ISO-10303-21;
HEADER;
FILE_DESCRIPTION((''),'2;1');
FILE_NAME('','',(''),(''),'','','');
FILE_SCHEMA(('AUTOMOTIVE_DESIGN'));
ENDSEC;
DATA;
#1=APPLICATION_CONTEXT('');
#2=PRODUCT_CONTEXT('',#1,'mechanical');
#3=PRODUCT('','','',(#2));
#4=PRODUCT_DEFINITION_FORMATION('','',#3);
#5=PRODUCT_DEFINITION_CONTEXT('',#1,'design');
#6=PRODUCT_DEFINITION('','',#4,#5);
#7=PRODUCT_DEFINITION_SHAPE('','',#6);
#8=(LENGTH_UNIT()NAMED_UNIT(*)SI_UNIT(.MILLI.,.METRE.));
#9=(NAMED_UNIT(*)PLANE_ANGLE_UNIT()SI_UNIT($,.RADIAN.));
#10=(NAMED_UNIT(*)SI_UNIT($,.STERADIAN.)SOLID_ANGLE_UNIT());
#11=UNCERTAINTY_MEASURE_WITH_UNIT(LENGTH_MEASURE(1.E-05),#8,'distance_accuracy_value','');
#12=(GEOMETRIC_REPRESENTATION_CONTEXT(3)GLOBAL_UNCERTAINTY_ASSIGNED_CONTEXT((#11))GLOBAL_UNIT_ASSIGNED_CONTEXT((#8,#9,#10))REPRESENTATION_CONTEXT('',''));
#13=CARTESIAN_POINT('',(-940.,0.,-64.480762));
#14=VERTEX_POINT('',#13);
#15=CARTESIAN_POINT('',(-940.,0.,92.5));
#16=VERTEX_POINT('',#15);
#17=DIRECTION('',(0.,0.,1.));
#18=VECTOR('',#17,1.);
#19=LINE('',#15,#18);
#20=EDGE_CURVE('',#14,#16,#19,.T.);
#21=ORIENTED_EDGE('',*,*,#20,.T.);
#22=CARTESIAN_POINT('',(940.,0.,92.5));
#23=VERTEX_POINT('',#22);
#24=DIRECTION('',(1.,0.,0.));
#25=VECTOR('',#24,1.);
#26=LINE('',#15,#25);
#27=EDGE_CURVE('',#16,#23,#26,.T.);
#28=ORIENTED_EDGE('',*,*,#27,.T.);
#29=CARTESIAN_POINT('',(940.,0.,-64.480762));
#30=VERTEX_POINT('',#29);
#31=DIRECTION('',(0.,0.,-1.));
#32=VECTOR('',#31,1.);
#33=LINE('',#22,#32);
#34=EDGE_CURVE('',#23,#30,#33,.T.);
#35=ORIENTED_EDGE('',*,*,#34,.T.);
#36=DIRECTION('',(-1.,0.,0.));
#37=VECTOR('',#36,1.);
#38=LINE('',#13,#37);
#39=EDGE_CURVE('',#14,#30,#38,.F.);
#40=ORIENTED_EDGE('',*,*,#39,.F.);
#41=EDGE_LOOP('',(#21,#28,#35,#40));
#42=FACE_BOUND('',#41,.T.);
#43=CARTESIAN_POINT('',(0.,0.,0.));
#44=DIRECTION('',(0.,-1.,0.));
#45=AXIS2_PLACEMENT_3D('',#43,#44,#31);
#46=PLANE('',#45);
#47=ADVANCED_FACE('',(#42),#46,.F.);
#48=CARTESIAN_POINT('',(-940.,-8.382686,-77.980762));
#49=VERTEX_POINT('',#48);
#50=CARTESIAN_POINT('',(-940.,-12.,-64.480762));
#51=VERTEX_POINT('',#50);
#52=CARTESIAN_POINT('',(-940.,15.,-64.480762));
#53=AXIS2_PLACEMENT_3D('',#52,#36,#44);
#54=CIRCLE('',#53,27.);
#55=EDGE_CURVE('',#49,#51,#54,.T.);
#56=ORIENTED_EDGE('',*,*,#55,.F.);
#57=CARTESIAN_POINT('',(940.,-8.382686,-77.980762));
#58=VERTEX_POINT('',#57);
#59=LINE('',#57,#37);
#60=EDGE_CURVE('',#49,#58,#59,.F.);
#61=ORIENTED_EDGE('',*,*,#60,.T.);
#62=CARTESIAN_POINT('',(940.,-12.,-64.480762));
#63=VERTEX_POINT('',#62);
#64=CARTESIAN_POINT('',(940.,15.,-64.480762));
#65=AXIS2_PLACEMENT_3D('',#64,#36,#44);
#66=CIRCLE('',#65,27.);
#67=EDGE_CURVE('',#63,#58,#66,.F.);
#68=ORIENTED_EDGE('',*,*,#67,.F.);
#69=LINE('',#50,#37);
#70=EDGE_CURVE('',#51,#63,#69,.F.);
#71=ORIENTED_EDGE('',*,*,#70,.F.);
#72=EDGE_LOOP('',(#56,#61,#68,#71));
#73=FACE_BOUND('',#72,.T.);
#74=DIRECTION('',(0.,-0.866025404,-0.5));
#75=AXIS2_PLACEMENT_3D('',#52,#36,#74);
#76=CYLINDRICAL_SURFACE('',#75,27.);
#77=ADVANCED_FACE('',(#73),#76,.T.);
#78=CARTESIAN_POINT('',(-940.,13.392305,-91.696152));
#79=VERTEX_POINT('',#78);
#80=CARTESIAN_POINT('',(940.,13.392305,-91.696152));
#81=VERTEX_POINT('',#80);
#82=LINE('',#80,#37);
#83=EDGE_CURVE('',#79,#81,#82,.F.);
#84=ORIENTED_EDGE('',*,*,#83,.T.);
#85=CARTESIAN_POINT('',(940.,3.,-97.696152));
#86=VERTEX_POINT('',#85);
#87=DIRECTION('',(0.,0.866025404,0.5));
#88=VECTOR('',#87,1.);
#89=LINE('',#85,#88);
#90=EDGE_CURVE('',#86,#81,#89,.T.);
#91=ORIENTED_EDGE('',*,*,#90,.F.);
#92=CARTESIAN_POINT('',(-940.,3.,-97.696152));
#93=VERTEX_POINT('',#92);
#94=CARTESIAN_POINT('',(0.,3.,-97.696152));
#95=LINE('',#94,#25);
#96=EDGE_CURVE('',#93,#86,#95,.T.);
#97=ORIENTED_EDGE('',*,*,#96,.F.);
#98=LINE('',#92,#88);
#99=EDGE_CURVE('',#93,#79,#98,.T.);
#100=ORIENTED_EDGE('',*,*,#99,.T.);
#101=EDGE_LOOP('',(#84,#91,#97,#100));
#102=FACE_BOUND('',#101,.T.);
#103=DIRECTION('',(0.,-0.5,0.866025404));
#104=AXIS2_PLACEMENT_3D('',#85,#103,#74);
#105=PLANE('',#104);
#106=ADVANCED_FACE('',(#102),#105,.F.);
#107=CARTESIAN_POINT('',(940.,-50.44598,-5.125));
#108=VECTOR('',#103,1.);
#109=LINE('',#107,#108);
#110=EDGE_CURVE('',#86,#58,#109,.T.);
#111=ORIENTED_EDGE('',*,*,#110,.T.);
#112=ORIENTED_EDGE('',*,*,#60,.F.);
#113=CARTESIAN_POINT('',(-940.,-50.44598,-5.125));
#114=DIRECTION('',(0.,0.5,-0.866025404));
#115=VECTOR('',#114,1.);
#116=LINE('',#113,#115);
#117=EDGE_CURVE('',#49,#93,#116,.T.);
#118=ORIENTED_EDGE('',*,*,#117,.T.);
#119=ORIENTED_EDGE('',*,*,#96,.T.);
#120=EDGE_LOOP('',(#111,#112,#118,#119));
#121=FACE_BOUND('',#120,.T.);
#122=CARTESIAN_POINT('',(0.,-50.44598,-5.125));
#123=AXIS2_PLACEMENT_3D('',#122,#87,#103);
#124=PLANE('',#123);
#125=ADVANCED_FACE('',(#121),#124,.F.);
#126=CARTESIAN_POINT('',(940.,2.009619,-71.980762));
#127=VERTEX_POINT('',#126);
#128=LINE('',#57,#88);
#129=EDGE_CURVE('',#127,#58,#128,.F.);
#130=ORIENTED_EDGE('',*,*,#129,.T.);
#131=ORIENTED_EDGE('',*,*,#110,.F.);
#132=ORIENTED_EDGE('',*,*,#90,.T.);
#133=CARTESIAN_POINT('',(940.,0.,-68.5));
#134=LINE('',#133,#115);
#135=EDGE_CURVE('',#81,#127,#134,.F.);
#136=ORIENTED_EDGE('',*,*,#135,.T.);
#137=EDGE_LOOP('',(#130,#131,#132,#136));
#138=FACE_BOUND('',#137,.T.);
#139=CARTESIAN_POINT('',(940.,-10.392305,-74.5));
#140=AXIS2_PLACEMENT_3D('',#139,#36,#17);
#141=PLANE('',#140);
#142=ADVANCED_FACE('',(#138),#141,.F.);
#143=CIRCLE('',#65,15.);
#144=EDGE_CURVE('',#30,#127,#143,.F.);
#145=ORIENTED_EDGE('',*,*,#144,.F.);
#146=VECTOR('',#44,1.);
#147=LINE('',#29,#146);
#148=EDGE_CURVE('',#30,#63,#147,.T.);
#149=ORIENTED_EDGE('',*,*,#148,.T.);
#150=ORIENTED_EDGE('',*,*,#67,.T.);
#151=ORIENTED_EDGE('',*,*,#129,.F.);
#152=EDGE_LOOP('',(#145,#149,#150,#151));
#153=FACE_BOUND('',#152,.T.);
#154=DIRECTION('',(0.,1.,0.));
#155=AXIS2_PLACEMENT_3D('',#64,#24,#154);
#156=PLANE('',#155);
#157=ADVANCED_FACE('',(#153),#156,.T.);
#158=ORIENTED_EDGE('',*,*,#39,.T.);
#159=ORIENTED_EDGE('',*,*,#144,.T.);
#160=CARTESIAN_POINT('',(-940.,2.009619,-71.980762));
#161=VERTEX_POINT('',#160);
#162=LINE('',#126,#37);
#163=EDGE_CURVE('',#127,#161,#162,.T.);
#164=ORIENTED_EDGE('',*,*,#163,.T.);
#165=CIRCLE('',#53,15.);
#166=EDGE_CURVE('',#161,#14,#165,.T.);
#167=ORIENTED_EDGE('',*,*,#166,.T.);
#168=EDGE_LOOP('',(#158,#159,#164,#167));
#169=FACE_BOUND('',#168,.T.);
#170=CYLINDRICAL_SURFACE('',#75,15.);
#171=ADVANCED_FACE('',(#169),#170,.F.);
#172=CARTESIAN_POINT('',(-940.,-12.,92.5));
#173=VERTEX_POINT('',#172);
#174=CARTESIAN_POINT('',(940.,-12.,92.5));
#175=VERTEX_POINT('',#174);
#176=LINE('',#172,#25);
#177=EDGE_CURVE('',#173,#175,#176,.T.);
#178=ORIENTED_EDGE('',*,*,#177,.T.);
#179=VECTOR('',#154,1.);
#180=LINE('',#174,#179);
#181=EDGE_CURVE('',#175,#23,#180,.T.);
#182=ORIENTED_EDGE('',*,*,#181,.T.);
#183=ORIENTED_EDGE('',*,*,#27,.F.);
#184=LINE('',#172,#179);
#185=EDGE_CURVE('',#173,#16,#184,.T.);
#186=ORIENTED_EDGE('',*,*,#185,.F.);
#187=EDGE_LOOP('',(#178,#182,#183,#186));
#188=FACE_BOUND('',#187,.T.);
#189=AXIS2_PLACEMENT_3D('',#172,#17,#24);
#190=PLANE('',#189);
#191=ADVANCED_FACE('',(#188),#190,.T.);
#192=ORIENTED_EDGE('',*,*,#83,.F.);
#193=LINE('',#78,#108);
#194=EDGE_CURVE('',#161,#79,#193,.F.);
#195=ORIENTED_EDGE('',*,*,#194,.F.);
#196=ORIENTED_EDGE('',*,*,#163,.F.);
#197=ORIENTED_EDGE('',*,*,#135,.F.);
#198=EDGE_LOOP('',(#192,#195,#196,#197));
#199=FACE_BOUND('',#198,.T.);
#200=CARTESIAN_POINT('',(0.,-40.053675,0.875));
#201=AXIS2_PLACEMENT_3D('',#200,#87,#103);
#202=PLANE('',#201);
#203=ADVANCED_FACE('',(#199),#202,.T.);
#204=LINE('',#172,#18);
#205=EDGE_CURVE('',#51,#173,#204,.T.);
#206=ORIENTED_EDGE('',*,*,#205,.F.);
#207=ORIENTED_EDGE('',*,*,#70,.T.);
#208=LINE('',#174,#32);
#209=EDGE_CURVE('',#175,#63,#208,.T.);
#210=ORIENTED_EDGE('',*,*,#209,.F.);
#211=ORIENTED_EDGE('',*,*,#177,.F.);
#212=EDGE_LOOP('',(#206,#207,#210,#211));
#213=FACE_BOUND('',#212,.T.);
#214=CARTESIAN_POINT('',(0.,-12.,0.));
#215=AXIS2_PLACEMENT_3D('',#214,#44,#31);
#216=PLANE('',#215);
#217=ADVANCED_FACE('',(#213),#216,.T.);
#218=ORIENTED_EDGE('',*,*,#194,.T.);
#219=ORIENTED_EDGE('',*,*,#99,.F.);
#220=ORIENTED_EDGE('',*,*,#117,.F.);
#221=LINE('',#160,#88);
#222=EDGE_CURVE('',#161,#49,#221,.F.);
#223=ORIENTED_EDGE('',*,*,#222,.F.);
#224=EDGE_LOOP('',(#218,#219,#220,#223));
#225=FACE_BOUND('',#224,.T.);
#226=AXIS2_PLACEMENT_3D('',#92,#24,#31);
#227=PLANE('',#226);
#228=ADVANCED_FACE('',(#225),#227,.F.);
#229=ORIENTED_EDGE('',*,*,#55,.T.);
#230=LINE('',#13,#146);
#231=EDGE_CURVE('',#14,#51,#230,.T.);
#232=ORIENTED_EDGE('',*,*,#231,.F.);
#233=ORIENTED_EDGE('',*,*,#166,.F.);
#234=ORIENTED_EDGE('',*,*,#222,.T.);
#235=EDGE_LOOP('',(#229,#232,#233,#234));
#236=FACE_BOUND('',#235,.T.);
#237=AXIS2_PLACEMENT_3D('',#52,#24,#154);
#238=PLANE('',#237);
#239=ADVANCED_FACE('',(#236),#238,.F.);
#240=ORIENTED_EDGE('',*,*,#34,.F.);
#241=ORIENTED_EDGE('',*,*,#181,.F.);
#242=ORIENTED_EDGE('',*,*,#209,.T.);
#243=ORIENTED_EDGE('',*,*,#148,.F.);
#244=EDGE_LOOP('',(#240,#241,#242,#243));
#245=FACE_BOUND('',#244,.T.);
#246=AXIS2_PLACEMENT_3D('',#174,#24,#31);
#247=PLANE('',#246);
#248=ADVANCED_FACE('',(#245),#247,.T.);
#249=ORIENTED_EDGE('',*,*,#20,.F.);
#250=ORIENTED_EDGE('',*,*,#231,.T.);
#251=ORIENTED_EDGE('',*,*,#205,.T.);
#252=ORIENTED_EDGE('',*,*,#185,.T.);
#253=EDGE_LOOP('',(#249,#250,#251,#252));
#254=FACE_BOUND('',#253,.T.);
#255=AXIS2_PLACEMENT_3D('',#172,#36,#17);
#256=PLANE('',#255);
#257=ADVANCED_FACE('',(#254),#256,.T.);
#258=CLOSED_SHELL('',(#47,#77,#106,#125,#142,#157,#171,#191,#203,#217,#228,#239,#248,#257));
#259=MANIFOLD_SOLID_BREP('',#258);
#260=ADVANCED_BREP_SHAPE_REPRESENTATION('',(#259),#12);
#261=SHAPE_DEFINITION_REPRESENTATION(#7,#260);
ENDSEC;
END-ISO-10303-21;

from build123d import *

# Parameters (mm, degrees)
SKETCH1_W            = 1880
SKETCH1_H            = 185
BASE_FLANGE1_DEPTH   = 12
EDGE_FLANGE1_START   = -940
EDGE_FLANGE1_DEPTH   = 1880
EDGE_FLANGE1_2_DEPTH = 1880


# Read off the part's stored shape, not the designer's step: Edge-Flange1
# Sheet-metal steps are written as plain solids
with BuildPart() as part:
    # Sketch1 → Base-Flange1 (new body)
    with BuildSketch(Plane(origin=(0, 0, 0), x_dir=(1, 0, 0), z_dir=(0, 1, 0))):
        Rectangle(SKETCH1_W, SKETCH1_H)
    extrude(amount=-BASE_FLANGE1_DEPTH)

    # Edge-Flange1 outline → Edge-Flange1 (cut)
    with BuildSketch(Plane.YZ.offset(EDGE_FLANGE1_START)):
        with BuildLine():
            Line((0, -92.5), (-8.382685902, -77.980762114))
            ThreePointArc((-8.382685902, -77.980762114), (-11.07999731, -71.468876332), (-12, -64.480762114))
            Line((-12, -64.480762114), (-12, -92.5))
            Line((-12, -92.5), (0, -92.5))
        make_face()
    extrude(amount=EDGE_FLANGE1_DEPTH, mode=Mode.SUBTRACT)

    # Edge-Flange1 2 outline → Edge-Flange1 2 (add)
    with BuildSketch(Plane.YZ.offset(EDGE_FLANGE1_START)):
        with BuildLine():
            Line((0, -64.480762114), (0, -92.5))
            Line((0, -92.5), (3, -97.696152423))
            Line((3, -97.696152423), (13.392304845, -91.696152423))
            Line((13.392304845, -91.696152423), (2.009618943, -71.980762114))
            ThreePointArc((2.009618943, -71.980762114), (0.511112606, -68.36304779), (0, -64.480762114))
        make_face()
    extrude(amount=EDGE_FLANGE1_2_DEPTH)


solid = part.part
